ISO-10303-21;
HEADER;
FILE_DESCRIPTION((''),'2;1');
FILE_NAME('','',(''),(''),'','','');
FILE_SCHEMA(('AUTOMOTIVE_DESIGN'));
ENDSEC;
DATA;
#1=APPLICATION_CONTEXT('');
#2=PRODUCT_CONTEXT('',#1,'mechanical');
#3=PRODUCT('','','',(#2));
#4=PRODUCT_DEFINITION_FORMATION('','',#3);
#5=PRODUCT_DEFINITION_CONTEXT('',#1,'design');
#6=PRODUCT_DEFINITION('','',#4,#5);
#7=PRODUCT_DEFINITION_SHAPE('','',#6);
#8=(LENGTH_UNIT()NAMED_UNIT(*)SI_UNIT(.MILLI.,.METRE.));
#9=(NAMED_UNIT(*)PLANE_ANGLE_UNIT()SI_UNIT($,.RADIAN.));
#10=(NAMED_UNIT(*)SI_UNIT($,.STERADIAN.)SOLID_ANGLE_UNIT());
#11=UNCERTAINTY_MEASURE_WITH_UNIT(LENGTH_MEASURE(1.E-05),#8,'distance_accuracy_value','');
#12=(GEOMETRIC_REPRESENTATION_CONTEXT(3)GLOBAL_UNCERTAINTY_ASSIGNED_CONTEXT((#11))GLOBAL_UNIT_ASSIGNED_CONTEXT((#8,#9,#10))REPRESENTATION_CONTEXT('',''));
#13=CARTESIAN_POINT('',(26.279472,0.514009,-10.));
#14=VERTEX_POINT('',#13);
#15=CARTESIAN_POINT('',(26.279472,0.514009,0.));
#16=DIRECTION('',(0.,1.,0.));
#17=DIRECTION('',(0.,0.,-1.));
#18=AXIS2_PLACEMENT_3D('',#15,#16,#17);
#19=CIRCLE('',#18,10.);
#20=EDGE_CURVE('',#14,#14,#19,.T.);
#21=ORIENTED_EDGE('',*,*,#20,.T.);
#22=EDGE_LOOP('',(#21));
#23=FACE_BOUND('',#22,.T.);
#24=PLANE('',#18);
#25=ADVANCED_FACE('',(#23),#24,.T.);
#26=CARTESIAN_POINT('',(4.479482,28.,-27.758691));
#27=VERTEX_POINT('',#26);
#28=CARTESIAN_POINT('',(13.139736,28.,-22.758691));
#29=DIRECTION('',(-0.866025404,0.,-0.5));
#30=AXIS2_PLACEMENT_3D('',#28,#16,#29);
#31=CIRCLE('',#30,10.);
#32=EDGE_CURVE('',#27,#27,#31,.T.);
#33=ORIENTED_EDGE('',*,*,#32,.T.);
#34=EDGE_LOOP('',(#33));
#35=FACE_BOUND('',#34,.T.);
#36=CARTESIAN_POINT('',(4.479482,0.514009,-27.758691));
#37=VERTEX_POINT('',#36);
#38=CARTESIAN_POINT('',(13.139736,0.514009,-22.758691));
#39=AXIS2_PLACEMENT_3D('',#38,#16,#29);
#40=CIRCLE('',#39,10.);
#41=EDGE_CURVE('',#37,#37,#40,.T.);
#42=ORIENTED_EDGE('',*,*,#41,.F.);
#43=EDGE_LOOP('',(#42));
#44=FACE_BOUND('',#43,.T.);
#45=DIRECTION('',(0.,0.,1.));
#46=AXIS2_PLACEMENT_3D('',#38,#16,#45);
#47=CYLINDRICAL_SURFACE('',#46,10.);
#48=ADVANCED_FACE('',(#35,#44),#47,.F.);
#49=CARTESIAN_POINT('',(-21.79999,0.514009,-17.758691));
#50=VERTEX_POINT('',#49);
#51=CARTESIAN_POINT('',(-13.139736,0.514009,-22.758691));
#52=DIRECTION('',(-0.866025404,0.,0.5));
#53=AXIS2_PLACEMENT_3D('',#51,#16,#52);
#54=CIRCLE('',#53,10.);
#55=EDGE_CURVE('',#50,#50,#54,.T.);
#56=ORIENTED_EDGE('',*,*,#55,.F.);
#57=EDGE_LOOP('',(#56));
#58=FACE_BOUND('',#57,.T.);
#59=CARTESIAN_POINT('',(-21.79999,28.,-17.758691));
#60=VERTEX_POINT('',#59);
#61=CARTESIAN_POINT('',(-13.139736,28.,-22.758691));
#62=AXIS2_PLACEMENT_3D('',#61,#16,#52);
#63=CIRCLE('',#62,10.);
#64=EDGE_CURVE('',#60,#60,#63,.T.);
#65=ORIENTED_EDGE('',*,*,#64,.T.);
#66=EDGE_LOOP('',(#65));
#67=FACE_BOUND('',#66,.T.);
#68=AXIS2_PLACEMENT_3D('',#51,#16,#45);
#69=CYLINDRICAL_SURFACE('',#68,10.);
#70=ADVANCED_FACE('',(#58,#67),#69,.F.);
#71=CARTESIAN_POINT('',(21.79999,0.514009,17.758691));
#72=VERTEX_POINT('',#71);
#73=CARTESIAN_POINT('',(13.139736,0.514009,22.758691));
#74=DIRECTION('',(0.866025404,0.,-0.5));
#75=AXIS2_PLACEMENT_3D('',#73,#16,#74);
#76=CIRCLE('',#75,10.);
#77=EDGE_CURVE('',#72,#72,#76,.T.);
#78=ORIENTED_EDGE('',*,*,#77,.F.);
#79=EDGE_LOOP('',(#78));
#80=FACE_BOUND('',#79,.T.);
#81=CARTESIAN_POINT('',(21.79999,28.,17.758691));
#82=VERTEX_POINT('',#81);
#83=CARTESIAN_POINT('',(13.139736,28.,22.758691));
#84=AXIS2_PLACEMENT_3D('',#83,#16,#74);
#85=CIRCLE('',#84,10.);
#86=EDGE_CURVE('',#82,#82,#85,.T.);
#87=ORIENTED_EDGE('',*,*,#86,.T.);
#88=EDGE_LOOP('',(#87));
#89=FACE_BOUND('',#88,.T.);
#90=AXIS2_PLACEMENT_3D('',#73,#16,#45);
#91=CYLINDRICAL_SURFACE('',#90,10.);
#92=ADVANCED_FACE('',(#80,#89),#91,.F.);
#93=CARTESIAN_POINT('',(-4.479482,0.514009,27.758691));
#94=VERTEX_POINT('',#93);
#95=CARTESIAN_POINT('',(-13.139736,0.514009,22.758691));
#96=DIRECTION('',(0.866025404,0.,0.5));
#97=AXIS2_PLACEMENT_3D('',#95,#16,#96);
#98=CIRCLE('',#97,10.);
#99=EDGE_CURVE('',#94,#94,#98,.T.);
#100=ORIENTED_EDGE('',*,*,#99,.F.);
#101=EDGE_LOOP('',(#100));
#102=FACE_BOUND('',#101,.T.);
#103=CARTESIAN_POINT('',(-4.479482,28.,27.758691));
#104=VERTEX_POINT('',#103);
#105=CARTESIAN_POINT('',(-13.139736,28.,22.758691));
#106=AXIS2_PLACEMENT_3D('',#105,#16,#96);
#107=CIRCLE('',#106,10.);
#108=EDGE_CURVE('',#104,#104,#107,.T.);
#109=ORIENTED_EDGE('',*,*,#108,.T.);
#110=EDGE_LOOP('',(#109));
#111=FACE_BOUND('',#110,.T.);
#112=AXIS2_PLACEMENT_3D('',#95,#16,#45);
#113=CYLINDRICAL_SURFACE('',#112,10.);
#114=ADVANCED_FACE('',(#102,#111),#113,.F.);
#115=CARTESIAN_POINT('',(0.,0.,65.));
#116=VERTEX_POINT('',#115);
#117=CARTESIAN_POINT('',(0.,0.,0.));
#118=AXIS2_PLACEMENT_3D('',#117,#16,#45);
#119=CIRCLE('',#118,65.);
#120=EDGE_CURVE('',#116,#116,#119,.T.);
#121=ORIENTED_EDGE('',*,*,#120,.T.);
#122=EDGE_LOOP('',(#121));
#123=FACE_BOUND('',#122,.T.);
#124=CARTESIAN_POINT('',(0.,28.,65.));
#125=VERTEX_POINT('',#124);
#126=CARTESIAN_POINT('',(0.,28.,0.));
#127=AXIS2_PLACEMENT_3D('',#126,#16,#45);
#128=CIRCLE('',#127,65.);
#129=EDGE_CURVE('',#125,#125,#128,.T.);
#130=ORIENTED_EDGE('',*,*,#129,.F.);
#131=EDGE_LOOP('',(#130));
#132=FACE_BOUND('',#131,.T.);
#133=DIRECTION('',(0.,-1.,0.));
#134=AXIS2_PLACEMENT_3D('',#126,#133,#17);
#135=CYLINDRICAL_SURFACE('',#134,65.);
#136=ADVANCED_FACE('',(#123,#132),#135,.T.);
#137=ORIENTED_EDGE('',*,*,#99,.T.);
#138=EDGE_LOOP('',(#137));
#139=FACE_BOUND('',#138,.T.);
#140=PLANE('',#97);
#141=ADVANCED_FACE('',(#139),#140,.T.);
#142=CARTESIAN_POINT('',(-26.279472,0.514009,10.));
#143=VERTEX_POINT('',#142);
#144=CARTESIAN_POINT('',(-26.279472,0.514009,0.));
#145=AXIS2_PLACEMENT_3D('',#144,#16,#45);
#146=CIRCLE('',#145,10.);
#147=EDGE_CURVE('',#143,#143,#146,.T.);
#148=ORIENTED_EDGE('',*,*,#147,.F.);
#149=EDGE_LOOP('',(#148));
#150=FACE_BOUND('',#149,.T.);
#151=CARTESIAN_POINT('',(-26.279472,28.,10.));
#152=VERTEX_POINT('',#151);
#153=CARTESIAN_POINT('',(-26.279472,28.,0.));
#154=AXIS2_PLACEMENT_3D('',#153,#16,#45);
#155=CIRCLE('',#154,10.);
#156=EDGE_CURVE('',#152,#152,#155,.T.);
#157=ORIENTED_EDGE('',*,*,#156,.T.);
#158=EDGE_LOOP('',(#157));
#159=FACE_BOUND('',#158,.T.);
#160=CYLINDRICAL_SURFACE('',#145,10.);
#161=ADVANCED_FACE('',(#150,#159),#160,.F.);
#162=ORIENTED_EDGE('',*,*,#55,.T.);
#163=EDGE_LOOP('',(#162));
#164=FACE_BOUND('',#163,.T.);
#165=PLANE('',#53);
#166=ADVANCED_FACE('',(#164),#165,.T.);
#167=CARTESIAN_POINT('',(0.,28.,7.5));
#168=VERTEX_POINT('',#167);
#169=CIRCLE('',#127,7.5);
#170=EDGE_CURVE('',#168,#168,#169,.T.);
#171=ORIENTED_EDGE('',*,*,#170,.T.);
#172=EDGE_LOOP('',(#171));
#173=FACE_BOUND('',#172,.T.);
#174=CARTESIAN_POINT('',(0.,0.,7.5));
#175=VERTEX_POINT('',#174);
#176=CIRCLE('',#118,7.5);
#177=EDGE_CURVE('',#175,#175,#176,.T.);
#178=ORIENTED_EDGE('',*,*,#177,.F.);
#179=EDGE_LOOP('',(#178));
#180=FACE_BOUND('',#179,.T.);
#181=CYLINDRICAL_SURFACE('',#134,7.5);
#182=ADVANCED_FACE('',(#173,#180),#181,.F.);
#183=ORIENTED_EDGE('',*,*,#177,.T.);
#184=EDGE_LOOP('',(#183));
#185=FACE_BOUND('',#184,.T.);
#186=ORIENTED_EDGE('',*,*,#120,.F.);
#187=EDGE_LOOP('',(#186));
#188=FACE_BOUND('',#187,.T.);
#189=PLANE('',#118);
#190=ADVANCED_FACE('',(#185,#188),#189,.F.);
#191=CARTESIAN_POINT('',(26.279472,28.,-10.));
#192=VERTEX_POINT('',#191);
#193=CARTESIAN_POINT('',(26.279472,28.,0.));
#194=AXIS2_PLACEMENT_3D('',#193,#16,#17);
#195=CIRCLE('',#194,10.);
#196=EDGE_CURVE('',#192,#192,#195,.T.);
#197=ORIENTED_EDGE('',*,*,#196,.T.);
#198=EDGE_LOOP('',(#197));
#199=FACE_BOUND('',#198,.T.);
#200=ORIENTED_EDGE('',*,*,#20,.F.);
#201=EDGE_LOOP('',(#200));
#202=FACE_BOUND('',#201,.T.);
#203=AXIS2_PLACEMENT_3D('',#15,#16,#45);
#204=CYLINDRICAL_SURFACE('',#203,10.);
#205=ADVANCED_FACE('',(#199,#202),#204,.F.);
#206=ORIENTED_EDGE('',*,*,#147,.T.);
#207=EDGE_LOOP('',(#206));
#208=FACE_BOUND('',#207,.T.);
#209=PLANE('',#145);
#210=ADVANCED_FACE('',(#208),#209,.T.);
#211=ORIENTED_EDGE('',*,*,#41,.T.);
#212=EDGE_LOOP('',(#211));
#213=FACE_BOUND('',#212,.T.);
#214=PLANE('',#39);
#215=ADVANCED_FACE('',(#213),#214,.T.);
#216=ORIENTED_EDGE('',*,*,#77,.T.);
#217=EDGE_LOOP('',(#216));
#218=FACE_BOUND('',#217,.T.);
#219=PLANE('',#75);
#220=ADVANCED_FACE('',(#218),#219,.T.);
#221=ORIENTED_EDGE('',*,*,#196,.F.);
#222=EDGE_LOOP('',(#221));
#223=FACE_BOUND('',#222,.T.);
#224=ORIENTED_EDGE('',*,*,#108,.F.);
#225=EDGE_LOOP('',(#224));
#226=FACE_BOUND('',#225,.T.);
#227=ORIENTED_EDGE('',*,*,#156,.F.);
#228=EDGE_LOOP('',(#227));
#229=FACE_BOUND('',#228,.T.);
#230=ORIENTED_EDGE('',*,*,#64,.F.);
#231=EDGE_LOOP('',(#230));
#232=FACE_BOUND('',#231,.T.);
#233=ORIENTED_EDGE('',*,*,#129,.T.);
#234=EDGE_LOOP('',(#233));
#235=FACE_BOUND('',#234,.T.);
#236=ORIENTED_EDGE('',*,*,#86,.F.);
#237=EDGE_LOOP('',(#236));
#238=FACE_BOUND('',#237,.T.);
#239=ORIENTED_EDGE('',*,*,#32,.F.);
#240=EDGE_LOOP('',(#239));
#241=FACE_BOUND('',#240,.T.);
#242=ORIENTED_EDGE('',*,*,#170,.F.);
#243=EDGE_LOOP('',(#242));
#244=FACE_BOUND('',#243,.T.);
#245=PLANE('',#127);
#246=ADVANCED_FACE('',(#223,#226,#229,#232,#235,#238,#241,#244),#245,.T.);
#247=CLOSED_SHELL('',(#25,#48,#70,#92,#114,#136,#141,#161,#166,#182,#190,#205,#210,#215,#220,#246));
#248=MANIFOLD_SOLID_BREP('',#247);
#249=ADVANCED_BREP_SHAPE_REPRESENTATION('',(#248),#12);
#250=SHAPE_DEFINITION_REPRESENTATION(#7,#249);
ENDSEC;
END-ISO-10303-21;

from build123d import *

# Parameters (mm, degrees)
SKETCH1_R           = 65
BOSS_EXTRUDE1_DEPTH = 28
SKETCH2_R           = 7.5
CUT_EXTRUDE1_DEPTH  = 97.093704268
SKETCH3_R           = 10
CUT_EXTRUDE2_DEPTH  = 27.485991172
CIRPATTERN1_COUNT   = 6


with BuildPart() as part:
    # Sketch1 → Boss-Extrude1 (new body)
    with BuildSketch(Plane(origin=(0, 0, 0), x_dir=(1, 0, 0), z_dir=(0, 1, 0))):
        Circle(SKETCH1_R)
    extrude(amount=BOSS_EXTRUDE1_DEPTH)

    # Sketch2 → Cut-Extrude1 (cut, through all)
    with BuildSketch(Plane(origin=(0, 0, 0), x_dir=(1, 0, 0), z_dir=(0, 1, 0))):
        Circle(SKETCH2_R)
    extrude(amount=CUT_EXTRUDE1_DEPTH, mode=Mode.SUBTRACT)

    # Sketch3 → Cut-Extrude2 (cut)
    with BuildSketch(Plane(origin=(0, 28, 0), x_dir=(1, 0, 0), z_dir=(0, 1, 0))):
        with Locations((-26.279472332, 0)):
            Circle(SKETCH3_R)
    cut_extrude2 = extrude(amount=-CUT_EXTRUDE2_DEPTH, mode=Mode.SUBTRACT)

    # CirPattern1: Cut-Extrude2 ×6 about axis
    cirpattern1_axis = Axis((0, 0, 0), (0, 1, 0))
    for i in range(1, CIRPATTERN1_COUNT):
        add(cut_extrude2.rotate(cirpattern1_axis, i * 360 / CIRPATTERN1_COUNT), mode=Mode.SUBTRACT)


solid = part.part
